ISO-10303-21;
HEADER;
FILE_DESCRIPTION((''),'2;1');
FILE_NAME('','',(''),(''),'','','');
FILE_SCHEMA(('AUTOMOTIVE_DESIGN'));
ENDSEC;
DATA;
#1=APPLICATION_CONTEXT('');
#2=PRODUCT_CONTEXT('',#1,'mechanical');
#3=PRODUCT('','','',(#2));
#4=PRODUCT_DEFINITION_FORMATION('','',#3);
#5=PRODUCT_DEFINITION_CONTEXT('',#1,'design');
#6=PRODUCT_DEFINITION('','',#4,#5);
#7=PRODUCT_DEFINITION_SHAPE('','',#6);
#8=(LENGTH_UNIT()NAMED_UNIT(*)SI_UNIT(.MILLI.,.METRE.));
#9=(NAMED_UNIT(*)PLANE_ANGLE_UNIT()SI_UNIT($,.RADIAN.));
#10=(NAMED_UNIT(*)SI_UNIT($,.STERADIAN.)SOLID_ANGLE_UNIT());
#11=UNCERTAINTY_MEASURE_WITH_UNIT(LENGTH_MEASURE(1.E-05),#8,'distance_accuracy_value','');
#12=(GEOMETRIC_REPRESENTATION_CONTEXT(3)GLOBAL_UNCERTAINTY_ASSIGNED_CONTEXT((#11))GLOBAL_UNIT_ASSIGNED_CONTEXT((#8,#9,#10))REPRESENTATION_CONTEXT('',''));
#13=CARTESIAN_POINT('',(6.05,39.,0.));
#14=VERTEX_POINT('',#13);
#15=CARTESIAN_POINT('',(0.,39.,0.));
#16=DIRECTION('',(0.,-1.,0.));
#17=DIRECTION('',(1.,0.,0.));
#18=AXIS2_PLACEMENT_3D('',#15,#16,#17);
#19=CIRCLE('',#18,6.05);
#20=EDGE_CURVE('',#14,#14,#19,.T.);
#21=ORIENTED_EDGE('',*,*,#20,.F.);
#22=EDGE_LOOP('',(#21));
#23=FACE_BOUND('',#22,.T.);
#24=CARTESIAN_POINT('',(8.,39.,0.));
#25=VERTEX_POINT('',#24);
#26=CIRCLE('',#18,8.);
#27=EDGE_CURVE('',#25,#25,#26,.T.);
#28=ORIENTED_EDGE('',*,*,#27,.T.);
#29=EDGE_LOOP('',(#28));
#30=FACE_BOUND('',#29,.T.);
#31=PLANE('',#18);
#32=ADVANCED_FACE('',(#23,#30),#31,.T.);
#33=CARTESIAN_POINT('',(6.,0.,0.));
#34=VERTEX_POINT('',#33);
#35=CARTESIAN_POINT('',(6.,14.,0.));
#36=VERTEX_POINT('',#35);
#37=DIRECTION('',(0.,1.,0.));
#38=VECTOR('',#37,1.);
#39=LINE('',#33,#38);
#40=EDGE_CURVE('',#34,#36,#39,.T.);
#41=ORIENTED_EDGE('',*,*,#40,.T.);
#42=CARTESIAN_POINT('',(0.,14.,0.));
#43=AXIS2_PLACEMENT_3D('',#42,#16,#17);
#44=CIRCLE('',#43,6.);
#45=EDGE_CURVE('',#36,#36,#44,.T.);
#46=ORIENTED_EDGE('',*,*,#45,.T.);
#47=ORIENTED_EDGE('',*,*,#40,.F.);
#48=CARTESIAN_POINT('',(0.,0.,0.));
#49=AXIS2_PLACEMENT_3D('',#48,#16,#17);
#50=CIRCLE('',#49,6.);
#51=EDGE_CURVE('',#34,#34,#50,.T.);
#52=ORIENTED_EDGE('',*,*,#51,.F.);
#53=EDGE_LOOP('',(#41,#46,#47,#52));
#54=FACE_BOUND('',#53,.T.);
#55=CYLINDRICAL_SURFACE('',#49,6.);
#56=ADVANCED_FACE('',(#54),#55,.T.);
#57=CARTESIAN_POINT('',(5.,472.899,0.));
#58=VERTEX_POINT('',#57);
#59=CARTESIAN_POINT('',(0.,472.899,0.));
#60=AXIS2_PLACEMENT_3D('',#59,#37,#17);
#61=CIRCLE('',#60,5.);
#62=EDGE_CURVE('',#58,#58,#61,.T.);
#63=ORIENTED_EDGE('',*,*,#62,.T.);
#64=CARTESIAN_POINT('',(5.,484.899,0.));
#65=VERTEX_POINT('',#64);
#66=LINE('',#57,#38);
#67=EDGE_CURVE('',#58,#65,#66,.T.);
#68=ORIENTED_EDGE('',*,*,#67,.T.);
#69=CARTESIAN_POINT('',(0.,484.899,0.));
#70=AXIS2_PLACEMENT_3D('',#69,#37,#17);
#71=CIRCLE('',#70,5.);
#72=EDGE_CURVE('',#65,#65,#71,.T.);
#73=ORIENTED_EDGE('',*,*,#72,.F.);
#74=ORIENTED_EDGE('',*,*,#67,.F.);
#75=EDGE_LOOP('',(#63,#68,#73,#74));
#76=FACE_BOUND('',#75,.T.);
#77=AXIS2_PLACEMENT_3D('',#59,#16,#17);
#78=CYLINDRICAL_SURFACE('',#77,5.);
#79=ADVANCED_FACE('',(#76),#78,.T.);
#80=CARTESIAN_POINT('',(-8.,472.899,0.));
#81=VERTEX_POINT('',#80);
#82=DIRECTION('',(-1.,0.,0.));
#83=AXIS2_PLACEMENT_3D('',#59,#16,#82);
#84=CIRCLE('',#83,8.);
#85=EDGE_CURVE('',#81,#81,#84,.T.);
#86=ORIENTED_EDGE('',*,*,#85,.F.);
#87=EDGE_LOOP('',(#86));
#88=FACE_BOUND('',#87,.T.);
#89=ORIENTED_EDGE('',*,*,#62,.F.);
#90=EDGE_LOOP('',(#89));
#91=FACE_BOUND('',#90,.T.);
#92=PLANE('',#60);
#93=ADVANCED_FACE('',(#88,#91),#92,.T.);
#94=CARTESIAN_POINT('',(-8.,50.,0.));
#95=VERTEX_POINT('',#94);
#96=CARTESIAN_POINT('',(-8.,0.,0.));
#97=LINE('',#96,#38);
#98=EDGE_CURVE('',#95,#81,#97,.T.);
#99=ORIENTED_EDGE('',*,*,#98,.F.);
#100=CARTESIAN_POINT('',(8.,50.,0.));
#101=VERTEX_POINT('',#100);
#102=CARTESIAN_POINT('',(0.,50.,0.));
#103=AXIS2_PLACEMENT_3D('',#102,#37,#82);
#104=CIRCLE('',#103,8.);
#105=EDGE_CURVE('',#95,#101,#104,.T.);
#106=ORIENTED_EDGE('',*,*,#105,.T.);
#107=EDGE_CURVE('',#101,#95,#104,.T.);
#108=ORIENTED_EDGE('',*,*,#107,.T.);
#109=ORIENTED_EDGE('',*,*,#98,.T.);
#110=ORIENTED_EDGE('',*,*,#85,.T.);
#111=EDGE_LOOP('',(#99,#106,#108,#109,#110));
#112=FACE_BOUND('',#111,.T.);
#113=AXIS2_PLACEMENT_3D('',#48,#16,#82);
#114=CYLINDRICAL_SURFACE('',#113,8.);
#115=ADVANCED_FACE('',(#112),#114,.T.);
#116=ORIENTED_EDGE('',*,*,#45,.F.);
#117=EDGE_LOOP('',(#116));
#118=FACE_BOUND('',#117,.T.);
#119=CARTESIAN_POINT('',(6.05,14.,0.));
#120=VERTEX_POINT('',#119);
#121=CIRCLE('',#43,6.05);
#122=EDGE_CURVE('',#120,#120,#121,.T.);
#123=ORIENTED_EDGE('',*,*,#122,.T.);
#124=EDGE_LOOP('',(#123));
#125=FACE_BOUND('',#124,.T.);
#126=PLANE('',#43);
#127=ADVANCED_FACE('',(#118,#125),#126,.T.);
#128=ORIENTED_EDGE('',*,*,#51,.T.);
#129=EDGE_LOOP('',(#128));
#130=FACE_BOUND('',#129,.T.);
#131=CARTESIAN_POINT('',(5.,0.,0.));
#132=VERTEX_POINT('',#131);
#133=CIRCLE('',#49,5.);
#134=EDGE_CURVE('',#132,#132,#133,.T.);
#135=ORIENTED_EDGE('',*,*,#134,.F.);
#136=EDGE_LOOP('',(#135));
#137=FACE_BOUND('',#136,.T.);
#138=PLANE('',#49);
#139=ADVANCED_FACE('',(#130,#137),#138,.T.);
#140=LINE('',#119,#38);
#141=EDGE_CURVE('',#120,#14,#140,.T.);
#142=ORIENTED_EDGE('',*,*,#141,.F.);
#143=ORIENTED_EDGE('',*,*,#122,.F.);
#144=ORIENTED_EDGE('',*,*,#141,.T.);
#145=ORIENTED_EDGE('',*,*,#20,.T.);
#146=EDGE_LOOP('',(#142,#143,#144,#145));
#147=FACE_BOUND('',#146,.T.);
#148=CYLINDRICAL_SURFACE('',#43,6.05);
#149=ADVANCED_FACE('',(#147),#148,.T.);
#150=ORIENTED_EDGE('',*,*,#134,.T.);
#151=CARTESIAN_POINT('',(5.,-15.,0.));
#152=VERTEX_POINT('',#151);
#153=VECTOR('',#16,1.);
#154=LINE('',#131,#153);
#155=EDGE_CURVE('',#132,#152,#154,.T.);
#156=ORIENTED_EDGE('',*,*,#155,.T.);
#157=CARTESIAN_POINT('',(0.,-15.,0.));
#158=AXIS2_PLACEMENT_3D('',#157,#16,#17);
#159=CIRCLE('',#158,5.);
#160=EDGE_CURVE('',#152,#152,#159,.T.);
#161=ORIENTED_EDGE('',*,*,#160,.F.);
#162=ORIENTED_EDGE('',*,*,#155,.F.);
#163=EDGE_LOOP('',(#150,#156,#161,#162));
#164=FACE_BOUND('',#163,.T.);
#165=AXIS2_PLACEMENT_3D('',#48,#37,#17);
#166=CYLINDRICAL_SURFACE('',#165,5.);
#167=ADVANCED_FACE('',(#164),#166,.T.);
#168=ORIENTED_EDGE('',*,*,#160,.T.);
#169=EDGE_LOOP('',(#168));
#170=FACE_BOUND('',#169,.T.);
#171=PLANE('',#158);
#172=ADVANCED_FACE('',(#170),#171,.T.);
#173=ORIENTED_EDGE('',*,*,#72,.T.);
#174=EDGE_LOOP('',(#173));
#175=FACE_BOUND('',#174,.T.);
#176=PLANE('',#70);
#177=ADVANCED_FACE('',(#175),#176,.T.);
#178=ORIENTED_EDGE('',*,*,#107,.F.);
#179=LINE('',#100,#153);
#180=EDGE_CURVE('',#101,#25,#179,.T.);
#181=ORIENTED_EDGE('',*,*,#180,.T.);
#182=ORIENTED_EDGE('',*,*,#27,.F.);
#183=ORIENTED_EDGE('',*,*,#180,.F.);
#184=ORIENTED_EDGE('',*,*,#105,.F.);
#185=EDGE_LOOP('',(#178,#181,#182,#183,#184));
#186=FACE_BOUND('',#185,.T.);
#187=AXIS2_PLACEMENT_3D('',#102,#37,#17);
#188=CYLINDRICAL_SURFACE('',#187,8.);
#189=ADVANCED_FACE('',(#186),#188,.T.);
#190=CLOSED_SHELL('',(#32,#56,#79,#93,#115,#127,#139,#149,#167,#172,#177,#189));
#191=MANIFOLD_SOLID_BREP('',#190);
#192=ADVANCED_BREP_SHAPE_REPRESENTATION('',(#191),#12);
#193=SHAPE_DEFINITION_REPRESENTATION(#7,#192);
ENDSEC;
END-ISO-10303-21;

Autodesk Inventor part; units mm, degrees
ref_plane "YZ Plane" through (0, 0, 0) normal (1, 0, 0) x (0, 1, 0)
ref_plane "XZ Plane" through (0, 0, 0) normal (0, 1, 0) x (-1, 0, 0)
ref_plane "XY Plane" through (0, 0, 0) normal (0, 0, 1) x (1, 0, 0)
sketch "Sketch1" plane through (0, 0, 0) normal (0, 1, 0) x (-1, 0, 0)
  circle A0 centre (0, 0) radius 8
  dimension "d0" = 16
extrude "Extrusion1" add sketch "Sketch1" along normal blind 500
sketch "Sketch2" plane through (0, 0, 0) normal (0, -1, 0) x (1, 0, 0)
  circle A0 centre (0, 0) radius 8 projected
extrude "Extrusion2" cut sketch "Sketch2" against normal blind 50
sketch "Sketch3" plane through (0, 50, 0) normal (0, -1, 0) x (1, 0, 0)
  circle A0 centre (0, 0) radius 8 projected
extrude "Extrusion3" add sketch "Sketch3" along normal blind 50
sketch "Sketch4" plane through (0, 0, 0) normal (0, -1, 0) x (1, 0, 0)
  circle A0 centre (0, 0) radius 8 projected
  circle A1 centre (0, 0) radius 6
  dimension "d7" = 12
extrude "Extrusion4" cut sketch "Sketch4" against normal blind 14
thread "Thread1" size "M12x1" class "6g" standard "ANSI Metric M Profile" full length
sketch "Sketch6" plane through (0, 14, 0) normal (0, -1, 0) x (1, 0, 0)
  circle A0 centre (0, 0) radius 8 projected
  circle A1 centre (0, 0) radius 6.05
  dimension "d13" = 12.1
extrude "Extrusion5" cut sketch "Sketch6" against normal blind 25
sketch "Sketch7" plane through (0, 0, 0) normal (0, -1, 0) x (1, 0, 0)
  circle A0 centre (0, 0) radius 6 projected
  circle A1 centre (0, 0) radius 5
  dimension "d16" = 10
extrude "Extrusion6" add sketch "Sketch7" along normal blind 15 contours A1
sketch "Sketch8" plane through (0, 500, 0) normal (0, 1, 0) x (1, 0, 0)
  circle A0 centre (0, 0) radius 8 projected
extrude "Extrusion7" cut sketch "Sketch8" against normal blind 27.101
sketch "Sketch9" plane through (0, 472.899, 0) normal (0, 1, 0) x (1, 0, 0)
  circle A0 centre (0, 0) radius 8 projected
  circle A1 centre (0, 0) radius 5
  dimension "d21" = 10
extrude "Extrusion8" add sketch "Sketch9" along normal blind 12 contours A1
properties part number "1605_500mm"
